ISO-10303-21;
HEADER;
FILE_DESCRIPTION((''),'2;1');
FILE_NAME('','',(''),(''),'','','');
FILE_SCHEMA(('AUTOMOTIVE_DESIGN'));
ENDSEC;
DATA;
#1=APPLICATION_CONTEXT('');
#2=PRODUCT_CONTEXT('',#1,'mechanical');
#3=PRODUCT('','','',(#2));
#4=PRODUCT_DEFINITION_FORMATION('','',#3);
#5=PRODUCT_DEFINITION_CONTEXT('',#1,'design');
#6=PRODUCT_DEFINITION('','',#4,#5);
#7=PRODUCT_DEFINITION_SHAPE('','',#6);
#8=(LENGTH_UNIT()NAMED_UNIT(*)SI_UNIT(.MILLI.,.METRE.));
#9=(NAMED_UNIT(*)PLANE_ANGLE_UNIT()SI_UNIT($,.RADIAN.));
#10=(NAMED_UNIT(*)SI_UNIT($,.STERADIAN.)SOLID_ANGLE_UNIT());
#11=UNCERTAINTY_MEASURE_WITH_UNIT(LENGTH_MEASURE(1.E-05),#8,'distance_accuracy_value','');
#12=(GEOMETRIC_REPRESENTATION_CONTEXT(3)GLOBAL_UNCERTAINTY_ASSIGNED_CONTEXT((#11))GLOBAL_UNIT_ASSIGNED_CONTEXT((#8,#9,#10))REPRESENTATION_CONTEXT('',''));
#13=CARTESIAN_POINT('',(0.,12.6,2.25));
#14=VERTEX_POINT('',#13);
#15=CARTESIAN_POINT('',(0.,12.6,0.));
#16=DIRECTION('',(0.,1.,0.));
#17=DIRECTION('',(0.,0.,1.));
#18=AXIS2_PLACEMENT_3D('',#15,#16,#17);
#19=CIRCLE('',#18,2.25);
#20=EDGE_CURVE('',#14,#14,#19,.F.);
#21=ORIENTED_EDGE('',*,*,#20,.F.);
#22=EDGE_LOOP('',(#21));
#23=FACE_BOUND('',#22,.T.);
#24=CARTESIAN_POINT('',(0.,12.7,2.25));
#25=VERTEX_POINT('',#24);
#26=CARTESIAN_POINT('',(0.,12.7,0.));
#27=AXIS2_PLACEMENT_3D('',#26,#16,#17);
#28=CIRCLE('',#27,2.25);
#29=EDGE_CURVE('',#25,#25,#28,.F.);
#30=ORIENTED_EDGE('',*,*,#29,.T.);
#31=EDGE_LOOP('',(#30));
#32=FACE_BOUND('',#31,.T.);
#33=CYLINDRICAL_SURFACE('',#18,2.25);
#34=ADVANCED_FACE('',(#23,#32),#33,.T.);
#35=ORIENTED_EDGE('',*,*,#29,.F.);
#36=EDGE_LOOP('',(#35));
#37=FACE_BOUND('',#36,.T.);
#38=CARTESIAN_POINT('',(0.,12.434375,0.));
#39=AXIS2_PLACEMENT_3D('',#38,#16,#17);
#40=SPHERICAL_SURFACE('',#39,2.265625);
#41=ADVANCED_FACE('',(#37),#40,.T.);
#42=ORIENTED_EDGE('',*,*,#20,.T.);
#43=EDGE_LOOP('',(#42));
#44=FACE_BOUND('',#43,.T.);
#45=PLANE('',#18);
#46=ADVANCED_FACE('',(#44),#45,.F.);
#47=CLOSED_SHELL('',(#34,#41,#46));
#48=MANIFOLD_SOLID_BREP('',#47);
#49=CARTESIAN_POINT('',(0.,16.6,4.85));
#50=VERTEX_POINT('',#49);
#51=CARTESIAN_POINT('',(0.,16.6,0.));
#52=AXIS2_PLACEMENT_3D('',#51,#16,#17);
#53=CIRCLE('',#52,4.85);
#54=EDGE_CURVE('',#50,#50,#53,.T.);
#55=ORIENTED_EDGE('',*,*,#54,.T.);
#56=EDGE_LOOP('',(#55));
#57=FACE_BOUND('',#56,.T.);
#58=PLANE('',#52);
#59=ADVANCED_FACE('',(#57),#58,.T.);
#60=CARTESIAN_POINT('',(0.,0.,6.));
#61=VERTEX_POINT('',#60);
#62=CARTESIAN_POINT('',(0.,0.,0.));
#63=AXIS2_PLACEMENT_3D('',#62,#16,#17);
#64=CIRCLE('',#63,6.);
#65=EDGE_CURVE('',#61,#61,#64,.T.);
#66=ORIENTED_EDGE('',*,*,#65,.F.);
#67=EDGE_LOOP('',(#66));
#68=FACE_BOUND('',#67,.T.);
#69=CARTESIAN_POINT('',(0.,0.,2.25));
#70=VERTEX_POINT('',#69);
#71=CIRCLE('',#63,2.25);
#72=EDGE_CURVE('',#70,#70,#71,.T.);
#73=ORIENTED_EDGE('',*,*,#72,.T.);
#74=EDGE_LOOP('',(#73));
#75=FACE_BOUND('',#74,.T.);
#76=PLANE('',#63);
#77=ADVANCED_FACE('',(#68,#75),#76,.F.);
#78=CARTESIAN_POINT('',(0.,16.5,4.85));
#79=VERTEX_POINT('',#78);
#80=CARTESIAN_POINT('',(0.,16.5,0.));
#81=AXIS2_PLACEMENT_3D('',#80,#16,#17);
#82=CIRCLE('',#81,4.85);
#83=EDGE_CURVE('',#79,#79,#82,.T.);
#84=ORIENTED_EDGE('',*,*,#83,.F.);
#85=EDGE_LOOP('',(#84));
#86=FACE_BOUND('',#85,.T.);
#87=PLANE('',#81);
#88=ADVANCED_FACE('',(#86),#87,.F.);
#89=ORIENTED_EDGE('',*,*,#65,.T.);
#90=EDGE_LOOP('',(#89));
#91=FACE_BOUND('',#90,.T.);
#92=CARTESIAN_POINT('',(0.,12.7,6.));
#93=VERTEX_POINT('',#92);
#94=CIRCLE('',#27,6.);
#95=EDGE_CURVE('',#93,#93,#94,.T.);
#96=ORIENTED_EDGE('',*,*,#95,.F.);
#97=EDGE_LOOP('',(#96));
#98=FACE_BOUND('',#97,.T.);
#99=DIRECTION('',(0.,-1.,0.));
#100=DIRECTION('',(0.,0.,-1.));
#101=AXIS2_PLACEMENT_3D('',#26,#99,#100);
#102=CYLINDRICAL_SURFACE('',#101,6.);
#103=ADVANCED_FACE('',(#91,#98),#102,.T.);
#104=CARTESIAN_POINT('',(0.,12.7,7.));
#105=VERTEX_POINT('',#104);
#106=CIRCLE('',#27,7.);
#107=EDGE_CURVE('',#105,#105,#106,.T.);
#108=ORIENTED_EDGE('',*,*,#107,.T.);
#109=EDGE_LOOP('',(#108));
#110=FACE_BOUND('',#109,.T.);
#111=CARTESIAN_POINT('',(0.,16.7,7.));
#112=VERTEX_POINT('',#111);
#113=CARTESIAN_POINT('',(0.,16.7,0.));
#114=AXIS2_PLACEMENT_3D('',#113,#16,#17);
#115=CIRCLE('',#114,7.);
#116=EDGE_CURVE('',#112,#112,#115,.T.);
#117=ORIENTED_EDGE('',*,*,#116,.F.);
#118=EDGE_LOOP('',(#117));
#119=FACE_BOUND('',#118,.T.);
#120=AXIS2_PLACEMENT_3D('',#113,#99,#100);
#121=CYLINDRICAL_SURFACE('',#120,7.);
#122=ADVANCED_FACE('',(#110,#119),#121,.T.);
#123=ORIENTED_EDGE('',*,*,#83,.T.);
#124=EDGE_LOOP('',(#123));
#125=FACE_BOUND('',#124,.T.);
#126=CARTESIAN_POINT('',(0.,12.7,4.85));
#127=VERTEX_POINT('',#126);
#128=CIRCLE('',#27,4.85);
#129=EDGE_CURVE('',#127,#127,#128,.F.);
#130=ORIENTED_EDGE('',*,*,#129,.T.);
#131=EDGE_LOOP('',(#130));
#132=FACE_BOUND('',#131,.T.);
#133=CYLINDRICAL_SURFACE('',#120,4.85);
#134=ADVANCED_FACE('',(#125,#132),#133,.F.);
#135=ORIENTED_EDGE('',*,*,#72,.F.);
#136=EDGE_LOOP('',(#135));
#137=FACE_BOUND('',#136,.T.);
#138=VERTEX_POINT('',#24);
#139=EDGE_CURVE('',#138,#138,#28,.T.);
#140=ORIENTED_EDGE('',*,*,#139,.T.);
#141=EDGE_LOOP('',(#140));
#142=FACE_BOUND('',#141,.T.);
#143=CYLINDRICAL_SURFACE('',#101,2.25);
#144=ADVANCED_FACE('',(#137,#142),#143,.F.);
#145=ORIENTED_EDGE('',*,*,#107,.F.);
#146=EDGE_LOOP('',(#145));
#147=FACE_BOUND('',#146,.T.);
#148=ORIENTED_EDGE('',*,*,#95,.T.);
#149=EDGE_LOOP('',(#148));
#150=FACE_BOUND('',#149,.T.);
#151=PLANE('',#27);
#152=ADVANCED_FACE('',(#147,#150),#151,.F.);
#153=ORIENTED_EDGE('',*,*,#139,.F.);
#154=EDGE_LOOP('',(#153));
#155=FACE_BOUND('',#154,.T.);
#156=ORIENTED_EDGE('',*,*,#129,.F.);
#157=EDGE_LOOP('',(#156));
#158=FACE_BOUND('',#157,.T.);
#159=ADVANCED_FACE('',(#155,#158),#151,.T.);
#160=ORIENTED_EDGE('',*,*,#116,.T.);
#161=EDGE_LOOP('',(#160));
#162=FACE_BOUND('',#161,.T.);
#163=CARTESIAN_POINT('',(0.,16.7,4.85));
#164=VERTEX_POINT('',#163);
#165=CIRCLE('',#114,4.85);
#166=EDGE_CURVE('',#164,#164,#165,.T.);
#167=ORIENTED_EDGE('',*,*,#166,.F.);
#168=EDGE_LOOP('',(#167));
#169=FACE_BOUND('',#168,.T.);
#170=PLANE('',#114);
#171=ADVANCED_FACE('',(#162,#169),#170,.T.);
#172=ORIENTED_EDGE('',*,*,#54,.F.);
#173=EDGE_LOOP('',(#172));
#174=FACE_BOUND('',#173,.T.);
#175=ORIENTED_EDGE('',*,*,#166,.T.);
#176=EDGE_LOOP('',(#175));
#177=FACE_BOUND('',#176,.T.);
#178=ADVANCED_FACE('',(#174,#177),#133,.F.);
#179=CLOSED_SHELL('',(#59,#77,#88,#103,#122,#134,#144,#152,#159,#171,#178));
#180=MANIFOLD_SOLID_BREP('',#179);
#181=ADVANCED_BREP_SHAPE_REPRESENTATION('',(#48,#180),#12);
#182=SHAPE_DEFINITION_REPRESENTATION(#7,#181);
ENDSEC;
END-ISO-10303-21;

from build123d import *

# Parameters (mm, degrees)
SKETCH1_R           = 6
SKETCH1_R_2         = 2.25
BOSS_EXTRUDE1_DEPTH = 12.7
SKETCH2_R           = 7
SKETCH2_R_2         = 6
SKETCH2_R_3         = 4.85
BOSS_EXTRUDE2_DEPTH = 4
BOSS_EXTRUDE3_START = 3.8
SKETCH2_2_R         = 4.85
BOSS_EXTRUDE3_DEPTH = 0.1
SKETCH2_6_R         = 2.25
BOSS_EXTRUDE4_DEPTH = 0.1


# Read off the part's stored shape, not the designer's step: Dome1
with BuildPart() as part:
    # Sketch1 → Boss-Extrude1 (new body)
    with BuildSketch(Plane(origin=(0, 0, 0), x_dir=(1, 0, 0), z_dir=(0, 1, 0))):
        with Locations(Location((0, 0, 0), (0, 0, 270))):
            Circle(SKETCH1_R)
        with Locations(Location((0, 0, 0), (0, 0, 270))):
            Circle(SKETCH1_R_2, mode=Mode.SUBTRACT)
    extrude(amount=BOSS_EXTRUDE1_DEPTH)

    # Sketch2 → Boss-Extrude2 (add)
    # profile 1 of 2: a face of its own
    with BuildSketch(Plane(origin=(0, 12.7, 0), x_dir=(1, 0, 0), z_dir=(0, 1, 0))):
        with Locations(Location((0, 0, 0), (0, 0, 270))):
            Circle(SKETCH2_R)
        with Locations(Location((0, 0, 0), (0, 0, 270))):
            Circle(SKETCH2_R_2, mode=Mode.SUBTRACT)
    # profile 2 of 2: a face of its own
    with BuildSketch(Plane(origin=(0, 12.7, 0), x_dir=(1, 0, 0), z_dir=(0, 1, 0))):
        with Locations(Location((0, 0, 0), (0, 0, 270))):
            Circle(SKETCH2_R_2)
        with Locations(Location((0, 0, 0), (0, 0, 270))):
            Circle(SKETCH2_R_3, mode=Mode.SUBTRACT)
    extrude(amount=BOSS_EXTRUDE2_DEPTH)

    # Sketch2<2> → Boss-Extrude3 (add)
    with BuildSketch(Plane(origin=(0, 12.7, 0), x_dir=(1, 0, 0), z_dir=(0, 1, 0)).offset(BOSS_EXTRUDE3_START)):
        with Locations(Location((0, 0, 0), (0, 0, 270))):
            Circle(SKETCH2_2_R)
    extrude(amount=BOSS_EXTRUDE3_DEPTH)


with BuildPart() as body_2:
    # Sketch2<6> → Boss-Extrude4 (new body)
    with BuildSketch(Plane(origin=(0, 12.7, 0), x_dir=(1, 0, 0), z_dir=(0, 1, 0))):
        with Locations(Location((0, 0, 0), (0, 0, 270))):
            Circle(SKETCH2_6_R)
    extrude(amount=-BOSS_EXTRUDE4_DEPTH)

    # Dome1 outline → Dome1 (revolve)
    with BuildSketch(Plane.XY):
        with BuildLine():
            Line((0, 12.7), (2.25, 12.699999998))
            ThreePointArc((2.25, 12.699999998), (1.505199323, 14.127724237), (0, 14.7))
            Line((0, 14.7), (0, 12.7))
        make_face()
    revolve(axis=Axis((0, 0, 0), (0, 1, 0)))


solid = Compound([part.part, body_2.part])
